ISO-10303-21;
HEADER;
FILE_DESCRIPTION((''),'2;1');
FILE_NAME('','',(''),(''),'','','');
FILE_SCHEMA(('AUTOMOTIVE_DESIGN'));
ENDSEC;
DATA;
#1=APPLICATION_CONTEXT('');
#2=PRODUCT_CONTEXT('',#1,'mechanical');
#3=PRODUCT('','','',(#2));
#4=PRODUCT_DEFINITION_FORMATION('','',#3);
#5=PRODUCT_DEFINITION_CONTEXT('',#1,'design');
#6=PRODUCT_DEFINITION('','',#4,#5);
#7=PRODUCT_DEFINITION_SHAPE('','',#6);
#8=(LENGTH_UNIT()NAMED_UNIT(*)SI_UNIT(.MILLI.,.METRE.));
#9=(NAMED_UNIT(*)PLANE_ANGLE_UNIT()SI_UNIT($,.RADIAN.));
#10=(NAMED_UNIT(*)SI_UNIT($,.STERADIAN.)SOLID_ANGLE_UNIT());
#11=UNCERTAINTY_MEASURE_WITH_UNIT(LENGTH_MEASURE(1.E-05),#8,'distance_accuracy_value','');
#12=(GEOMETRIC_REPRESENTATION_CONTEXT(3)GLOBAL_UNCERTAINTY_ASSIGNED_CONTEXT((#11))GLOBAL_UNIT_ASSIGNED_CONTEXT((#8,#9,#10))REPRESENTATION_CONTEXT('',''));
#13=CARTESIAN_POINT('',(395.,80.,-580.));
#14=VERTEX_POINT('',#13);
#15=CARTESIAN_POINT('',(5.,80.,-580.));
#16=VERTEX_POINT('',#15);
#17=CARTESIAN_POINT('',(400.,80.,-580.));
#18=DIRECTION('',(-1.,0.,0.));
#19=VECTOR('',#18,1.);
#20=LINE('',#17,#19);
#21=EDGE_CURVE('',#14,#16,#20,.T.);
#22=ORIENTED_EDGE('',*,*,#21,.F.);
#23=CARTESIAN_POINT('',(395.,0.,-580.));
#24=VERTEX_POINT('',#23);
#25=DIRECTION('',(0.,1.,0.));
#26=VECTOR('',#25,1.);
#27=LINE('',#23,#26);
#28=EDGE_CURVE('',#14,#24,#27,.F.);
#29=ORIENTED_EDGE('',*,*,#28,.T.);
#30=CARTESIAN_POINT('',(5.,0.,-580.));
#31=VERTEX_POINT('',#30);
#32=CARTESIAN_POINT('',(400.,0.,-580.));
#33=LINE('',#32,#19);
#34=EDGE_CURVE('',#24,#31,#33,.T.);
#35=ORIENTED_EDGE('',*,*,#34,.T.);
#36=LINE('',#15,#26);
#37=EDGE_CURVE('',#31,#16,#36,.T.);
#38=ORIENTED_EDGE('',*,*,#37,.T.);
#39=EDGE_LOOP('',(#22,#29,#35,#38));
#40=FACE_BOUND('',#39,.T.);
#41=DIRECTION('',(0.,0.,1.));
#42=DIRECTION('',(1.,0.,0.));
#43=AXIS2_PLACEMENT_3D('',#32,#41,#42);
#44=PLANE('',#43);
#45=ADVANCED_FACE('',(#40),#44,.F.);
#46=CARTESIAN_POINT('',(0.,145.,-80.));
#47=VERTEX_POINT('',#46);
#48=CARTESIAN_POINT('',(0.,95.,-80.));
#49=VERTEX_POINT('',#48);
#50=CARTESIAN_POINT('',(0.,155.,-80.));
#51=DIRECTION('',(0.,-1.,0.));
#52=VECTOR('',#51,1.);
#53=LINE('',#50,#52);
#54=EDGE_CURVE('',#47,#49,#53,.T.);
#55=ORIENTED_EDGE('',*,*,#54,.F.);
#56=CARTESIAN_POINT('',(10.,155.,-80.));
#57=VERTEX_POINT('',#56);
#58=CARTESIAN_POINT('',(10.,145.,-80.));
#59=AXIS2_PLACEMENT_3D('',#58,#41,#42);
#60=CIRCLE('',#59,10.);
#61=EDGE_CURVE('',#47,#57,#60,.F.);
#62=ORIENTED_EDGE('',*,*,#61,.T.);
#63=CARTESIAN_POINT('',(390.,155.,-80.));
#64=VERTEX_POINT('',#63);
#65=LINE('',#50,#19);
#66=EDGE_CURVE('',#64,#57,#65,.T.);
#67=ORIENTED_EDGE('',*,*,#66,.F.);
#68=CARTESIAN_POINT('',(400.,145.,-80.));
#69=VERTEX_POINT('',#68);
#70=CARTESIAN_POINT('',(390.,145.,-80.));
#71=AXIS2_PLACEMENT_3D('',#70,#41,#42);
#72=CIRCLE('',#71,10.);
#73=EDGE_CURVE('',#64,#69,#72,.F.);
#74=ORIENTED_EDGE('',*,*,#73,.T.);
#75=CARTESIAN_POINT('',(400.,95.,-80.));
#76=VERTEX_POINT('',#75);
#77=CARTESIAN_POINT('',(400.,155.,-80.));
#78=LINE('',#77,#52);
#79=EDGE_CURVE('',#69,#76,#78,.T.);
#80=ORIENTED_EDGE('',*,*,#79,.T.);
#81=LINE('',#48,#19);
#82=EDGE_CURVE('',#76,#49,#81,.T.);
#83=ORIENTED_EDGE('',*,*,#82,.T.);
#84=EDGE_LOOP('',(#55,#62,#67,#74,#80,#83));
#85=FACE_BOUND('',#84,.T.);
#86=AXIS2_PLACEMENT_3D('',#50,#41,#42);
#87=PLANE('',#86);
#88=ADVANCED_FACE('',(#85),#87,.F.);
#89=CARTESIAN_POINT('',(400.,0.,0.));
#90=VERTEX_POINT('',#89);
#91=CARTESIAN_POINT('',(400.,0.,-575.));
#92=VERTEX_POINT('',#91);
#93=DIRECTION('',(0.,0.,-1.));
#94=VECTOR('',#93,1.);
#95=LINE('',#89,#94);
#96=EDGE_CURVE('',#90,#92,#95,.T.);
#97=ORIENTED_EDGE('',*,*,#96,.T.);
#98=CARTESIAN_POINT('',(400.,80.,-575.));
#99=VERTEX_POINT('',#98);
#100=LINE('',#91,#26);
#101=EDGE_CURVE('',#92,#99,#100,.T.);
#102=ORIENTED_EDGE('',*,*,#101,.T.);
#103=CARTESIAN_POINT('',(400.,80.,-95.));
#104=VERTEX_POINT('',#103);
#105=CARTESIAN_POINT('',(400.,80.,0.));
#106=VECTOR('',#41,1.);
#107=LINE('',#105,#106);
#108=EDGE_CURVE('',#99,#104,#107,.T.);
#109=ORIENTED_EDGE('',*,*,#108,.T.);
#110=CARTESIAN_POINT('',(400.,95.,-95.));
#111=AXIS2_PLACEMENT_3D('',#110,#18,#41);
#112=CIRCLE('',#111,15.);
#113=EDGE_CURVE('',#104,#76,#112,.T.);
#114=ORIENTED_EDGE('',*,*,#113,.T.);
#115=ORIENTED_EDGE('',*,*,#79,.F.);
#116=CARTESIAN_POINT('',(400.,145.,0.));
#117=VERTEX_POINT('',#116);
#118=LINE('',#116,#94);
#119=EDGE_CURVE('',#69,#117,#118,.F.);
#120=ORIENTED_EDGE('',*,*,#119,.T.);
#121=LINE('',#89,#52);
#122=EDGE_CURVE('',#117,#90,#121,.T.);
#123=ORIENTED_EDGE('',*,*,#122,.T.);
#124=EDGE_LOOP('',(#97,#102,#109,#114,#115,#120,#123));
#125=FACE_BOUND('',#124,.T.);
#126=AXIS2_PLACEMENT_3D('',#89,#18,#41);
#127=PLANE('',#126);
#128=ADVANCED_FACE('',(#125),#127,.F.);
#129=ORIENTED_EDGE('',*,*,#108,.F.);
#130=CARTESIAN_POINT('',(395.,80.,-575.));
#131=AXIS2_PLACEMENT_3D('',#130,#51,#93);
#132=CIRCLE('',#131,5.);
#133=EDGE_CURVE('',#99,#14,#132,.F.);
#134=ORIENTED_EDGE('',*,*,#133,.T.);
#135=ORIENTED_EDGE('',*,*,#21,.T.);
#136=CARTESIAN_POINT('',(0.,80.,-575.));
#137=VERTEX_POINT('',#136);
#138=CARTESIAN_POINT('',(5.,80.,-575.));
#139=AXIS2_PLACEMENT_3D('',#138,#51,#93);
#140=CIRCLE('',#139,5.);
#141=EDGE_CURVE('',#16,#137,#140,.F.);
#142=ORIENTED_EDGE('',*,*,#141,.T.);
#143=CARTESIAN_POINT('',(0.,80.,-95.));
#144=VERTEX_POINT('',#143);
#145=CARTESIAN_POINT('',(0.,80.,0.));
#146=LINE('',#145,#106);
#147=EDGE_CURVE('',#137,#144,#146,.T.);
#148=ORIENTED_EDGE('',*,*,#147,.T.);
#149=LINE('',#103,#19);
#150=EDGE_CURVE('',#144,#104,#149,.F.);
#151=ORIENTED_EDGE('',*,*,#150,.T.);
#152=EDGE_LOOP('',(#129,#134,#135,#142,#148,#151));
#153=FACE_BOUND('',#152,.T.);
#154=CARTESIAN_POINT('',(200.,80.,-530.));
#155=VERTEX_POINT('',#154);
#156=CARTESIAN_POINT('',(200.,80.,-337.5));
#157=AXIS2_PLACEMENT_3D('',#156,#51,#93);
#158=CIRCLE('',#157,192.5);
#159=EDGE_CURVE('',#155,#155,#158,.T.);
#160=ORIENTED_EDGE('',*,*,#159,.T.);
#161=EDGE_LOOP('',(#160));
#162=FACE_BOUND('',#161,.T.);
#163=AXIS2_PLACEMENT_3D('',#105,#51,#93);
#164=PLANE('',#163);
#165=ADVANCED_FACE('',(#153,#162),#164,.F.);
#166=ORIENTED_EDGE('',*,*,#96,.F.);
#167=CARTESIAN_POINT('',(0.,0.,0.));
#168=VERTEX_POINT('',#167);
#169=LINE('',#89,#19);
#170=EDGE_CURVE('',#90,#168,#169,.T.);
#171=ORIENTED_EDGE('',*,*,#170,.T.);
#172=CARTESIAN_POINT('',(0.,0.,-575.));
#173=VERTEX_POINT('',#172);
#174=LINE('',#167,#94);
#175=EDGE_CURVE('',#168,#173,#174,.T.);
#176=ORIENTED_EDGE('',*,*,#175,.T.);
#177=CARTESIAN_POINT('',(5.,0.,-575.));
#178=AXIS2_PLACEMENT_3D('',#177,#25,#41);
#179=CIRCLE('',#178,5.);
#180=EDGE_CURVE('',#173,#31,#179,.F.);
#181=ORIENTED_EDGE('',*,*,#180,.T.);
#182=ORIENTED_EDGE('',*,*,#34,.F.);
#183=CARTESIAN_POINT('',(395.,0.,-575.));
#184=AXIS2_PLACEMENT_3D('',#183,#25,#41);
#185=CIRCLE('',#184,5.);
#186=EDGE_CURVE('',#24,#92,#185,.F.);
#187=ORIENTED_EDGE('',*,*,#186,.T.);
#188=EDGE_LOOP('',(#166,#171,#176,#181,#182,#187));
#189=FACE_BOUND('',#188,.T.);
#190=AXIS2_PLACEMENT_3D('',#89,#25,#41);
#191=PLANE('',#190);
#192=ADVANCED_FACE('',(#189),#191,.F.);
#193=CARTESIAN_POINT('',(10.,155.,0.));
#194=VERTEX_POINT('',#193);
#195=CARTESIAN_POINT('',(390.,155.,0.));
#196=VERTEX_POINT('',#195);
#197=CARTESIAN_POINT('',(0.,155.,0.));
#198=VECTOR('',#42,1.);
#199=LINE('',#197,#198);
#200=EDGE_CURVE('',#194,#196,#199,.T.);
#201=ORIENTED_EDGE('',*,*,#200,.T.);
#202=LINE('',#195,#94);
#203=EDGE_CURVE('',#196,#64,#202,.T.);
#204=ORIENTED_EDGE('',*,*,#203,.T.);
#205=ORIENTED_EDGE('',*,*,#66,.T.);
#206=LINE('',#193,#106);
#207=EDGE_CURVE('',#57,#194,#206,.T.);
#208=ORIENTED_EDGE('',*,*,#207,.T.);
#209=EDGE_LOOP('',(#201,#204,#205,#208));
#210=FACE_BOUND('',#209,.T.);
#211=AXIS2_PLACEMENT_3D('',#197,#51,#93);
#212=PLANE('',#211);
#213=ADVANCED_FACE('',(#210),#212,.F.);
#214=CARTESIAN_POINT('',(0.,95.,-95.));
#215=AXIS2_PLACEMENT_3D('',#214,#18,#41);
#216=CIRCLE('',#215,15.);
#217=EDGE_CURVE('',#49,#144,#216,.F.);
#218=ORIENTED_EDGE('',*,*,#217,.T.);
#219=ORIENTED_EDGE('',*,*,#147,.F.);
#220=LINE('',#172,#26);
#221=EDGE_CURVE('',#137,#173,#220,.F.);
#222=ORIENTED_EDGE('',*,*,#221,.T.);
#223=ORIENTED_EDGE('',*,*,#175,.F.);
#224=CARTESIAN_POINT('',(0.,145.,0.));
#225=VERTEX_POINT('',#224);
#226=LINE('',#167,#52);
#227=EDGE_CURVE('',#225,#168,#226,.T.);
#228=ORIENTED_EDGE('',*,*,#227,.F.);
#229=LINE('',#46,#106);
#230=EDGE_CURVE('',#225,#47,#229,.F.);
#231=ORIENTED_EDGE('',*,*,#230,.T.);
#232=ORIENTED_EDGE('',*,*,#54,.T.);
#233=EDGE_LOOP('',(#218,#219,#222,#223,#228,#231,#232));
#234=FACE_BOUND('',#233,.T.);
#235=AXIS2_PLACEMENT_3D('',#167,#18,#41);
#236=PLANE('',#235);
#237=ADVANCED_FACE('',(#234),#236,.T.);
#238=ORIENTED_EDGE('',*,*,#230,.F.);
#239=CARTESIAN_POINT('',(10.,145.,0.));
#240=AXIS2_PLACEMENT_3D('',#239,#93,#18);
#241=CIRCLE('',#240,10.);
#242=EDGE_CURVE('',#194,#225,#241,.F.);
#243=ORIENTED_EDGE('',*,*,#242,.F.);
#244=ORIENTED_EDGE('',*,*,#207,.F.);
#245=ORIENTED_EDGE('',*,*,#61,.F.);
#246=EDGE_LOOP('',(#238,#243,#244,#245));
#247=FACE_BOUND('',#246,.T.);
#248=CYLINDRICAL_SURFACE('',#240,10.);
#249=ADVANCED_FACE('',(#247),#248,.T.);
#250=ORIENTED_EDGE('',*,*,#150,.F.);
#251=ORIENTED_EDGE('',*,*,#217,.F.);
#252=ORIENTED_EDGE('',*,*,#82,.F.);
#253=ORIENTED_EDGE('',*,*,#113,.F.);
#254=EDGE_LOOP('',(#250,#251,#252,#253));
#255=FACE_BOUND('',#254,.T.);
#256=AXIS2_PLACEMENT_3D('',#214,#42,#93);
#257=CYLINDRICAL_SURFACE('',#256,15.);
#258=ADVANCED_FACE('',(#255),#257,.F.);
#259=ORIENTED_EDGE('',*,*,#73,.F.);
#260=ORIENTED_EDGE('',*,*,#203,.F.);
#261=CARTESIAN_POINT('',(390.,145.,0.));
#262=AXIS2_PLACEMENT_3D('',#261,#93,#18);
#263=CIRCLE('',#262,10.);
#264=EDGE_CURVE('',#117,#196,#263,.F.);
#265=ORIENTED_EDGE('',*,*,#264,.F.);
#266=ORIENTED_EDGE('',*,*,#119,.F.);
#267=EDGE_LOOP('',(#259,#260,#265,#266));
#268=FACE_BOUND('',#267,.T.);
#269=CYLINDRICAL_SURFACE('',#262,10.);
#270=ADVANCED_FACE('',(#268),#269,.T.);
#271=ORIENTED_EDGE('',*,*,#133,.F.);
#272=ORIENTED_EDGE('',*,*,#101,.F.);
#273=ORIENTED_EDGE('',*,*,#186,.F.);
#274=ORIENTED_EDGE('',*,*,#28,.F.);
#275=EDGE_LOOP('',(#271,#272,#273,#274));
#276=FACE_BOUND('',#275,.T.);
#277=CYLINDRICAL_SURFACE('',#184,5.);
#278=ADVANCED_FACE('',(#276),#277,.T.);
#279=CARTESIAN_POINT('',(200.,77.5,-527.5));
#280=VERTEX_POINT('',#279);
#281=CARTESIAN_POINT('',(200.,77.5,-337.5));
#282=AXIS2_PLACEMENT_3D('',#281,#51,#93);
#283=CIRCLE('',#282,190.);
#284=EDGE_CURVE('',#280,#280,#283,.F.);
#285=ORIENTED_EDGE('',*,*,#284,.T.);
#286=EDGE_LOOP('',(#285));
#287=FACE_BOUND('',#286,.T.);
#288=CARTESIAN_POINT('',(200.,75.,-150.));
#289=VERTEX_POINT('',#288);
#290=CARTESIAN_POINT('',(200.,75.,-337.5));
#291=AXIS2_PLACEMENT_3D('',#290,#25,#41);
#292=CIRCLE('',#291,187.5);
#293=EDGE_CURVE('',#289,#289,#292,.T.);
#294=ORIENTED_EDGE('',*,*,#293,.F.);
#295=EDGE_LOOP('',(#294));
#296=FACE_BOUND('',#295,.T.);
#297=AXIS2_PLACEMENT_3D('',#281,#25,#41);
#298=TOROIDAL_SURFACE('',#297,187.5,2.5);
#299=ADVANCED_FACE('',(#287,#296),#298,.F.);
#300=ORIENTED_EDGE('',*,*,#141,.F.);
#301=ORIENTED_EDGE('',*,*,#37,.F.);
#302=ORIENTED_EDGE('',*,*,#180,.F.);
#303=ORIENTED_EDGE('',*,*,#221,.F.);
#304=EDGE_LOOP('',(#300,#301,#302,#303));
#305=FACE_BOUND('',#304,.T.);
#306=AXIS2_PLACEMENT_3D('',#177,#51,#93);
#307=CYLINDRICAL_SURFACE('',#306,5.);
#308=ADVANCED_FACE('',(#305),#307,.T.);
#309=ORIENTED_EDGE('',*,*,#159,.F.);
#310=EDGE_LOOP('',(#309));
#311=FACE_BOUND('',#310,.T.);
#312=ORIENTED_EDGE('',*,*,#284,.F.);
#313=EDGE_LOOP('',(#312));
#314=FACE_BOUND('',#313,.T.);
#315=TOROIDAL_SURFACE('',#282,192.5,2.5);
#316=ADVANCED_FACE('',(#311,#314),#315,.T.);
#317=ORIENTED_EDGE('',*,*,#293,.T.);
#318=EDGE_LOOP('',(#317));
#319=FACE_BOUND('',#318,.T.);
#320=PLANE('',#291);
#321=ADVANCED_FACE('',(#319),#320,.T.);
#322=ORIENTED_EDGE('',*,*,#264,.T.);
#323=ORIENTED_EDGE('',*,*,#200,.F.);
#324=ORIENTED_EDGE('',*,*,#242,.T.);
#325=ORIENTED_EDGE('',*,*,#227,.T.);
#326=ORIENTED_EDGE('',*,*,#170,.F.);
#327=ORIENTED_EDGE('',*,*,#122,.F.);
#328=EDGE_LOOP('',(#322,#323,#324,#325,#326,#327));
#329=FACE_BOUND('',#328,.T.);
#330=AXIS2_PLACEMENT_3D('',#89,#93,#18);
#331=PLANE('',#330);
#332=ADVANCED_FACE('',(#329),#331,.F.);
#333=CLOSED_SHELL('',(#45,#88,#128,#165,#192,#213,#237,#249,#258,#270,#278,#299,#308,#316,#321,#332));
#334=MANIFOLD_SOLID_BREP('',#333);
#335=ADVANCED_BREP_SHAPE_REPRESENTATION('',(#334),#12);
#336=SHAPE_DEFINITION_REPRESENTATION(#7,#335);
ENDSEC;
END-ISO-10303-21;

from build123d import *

# Parameters (mm, degrees)
SKETCH1_W           = 580
SKETCH1_H           = 80
BOSS_EXTRUDE1_DEPTH = 400
SKETCH2_W           = 400
SKETCH2_H           = 80
BOSS_EXTRUDE2_DEPTH = 75
FILLET2_R           = 10
FILLET3_R           = 5
FILLET4_R           = 15
SKETCH3_R           = 190
CUT_EXTRUDE1_DEPTH  = 5
FILLET6_R           = 2.5


with BuildPart() as part:
    # Sketch1 → Boss-Extrude1 (new body)
    with BuildSketch(Plane(origin=(0, 0, 0), x_dir=(0, 0, -1), z_dir=(1, 0, 0))):
        with Locations((290, 40)):
            Rectangle(SKETCH1_W, SKETCH1_H)
    extrude(amount=BOSS_EXTRUDE1_DEPTH)

    # Sketch2 → Boss-Extrude2 (add)
    with BuildSketch(Plane(origin=(0, 80, 0), x_dir=(1, 0, 0), z_dir=(0, 1, 0))):
        with Locations((200, 40)):
            Rectangle(SKETCH2_W, SKETCH2_H)
    extrude(amount=BOSS_EXTRUDE2_DEPTH)

    # Fillet2
    fillet2_edges = [part.edges().sort_by_distance(p)[0] for p in [
        (0, 155, -40),
        (400, 155, -40),
    ]]
    fillet(fillet2_edges, radius=FILLET2_R)

    # Fillet3
    fillet3_edges = [part.edges().sort_by_distance(p)[0] for p in [
        (400, 40, -580),
        (0, 40, -580),
    ]]
    fillet(fillet3_edges, radius=FILLET3_R)

    # Fillet4
    fillet4_edges = [part.edges().sort_by_distance(p)[0] for p in [
        (200, 80, -80),
    ]]
    fillet(fillet4_edges, radius=FILLET4_R)

    # Sketch3 → Cut-Extrude1 (cut)
    with BuildSketch(Plane(origin=(0, 80, 0), x_dir=(1, 0, 0), z_dir=(0, 1, 0))):
        with Locations(Location((200, 337.5, 0), (0, 0, 270))):
            Circle(SKETCH3_R)
    extrude(amount=-CUT_EXTRUDE1_DEPTH, mode=Mode.SUBTRACT)

    # Fillet6
    fillet6_edges = [part.edges().sort_by_distance(p)[0] for p in [
        (200, 75, -527.5),
        (200, 80, -527.5),
    ]]
    fillet(fillet6_edges, radius=FILLET6_R - 0.0001)  # a hair under: the kernel refuses the full size


solid = part.part
